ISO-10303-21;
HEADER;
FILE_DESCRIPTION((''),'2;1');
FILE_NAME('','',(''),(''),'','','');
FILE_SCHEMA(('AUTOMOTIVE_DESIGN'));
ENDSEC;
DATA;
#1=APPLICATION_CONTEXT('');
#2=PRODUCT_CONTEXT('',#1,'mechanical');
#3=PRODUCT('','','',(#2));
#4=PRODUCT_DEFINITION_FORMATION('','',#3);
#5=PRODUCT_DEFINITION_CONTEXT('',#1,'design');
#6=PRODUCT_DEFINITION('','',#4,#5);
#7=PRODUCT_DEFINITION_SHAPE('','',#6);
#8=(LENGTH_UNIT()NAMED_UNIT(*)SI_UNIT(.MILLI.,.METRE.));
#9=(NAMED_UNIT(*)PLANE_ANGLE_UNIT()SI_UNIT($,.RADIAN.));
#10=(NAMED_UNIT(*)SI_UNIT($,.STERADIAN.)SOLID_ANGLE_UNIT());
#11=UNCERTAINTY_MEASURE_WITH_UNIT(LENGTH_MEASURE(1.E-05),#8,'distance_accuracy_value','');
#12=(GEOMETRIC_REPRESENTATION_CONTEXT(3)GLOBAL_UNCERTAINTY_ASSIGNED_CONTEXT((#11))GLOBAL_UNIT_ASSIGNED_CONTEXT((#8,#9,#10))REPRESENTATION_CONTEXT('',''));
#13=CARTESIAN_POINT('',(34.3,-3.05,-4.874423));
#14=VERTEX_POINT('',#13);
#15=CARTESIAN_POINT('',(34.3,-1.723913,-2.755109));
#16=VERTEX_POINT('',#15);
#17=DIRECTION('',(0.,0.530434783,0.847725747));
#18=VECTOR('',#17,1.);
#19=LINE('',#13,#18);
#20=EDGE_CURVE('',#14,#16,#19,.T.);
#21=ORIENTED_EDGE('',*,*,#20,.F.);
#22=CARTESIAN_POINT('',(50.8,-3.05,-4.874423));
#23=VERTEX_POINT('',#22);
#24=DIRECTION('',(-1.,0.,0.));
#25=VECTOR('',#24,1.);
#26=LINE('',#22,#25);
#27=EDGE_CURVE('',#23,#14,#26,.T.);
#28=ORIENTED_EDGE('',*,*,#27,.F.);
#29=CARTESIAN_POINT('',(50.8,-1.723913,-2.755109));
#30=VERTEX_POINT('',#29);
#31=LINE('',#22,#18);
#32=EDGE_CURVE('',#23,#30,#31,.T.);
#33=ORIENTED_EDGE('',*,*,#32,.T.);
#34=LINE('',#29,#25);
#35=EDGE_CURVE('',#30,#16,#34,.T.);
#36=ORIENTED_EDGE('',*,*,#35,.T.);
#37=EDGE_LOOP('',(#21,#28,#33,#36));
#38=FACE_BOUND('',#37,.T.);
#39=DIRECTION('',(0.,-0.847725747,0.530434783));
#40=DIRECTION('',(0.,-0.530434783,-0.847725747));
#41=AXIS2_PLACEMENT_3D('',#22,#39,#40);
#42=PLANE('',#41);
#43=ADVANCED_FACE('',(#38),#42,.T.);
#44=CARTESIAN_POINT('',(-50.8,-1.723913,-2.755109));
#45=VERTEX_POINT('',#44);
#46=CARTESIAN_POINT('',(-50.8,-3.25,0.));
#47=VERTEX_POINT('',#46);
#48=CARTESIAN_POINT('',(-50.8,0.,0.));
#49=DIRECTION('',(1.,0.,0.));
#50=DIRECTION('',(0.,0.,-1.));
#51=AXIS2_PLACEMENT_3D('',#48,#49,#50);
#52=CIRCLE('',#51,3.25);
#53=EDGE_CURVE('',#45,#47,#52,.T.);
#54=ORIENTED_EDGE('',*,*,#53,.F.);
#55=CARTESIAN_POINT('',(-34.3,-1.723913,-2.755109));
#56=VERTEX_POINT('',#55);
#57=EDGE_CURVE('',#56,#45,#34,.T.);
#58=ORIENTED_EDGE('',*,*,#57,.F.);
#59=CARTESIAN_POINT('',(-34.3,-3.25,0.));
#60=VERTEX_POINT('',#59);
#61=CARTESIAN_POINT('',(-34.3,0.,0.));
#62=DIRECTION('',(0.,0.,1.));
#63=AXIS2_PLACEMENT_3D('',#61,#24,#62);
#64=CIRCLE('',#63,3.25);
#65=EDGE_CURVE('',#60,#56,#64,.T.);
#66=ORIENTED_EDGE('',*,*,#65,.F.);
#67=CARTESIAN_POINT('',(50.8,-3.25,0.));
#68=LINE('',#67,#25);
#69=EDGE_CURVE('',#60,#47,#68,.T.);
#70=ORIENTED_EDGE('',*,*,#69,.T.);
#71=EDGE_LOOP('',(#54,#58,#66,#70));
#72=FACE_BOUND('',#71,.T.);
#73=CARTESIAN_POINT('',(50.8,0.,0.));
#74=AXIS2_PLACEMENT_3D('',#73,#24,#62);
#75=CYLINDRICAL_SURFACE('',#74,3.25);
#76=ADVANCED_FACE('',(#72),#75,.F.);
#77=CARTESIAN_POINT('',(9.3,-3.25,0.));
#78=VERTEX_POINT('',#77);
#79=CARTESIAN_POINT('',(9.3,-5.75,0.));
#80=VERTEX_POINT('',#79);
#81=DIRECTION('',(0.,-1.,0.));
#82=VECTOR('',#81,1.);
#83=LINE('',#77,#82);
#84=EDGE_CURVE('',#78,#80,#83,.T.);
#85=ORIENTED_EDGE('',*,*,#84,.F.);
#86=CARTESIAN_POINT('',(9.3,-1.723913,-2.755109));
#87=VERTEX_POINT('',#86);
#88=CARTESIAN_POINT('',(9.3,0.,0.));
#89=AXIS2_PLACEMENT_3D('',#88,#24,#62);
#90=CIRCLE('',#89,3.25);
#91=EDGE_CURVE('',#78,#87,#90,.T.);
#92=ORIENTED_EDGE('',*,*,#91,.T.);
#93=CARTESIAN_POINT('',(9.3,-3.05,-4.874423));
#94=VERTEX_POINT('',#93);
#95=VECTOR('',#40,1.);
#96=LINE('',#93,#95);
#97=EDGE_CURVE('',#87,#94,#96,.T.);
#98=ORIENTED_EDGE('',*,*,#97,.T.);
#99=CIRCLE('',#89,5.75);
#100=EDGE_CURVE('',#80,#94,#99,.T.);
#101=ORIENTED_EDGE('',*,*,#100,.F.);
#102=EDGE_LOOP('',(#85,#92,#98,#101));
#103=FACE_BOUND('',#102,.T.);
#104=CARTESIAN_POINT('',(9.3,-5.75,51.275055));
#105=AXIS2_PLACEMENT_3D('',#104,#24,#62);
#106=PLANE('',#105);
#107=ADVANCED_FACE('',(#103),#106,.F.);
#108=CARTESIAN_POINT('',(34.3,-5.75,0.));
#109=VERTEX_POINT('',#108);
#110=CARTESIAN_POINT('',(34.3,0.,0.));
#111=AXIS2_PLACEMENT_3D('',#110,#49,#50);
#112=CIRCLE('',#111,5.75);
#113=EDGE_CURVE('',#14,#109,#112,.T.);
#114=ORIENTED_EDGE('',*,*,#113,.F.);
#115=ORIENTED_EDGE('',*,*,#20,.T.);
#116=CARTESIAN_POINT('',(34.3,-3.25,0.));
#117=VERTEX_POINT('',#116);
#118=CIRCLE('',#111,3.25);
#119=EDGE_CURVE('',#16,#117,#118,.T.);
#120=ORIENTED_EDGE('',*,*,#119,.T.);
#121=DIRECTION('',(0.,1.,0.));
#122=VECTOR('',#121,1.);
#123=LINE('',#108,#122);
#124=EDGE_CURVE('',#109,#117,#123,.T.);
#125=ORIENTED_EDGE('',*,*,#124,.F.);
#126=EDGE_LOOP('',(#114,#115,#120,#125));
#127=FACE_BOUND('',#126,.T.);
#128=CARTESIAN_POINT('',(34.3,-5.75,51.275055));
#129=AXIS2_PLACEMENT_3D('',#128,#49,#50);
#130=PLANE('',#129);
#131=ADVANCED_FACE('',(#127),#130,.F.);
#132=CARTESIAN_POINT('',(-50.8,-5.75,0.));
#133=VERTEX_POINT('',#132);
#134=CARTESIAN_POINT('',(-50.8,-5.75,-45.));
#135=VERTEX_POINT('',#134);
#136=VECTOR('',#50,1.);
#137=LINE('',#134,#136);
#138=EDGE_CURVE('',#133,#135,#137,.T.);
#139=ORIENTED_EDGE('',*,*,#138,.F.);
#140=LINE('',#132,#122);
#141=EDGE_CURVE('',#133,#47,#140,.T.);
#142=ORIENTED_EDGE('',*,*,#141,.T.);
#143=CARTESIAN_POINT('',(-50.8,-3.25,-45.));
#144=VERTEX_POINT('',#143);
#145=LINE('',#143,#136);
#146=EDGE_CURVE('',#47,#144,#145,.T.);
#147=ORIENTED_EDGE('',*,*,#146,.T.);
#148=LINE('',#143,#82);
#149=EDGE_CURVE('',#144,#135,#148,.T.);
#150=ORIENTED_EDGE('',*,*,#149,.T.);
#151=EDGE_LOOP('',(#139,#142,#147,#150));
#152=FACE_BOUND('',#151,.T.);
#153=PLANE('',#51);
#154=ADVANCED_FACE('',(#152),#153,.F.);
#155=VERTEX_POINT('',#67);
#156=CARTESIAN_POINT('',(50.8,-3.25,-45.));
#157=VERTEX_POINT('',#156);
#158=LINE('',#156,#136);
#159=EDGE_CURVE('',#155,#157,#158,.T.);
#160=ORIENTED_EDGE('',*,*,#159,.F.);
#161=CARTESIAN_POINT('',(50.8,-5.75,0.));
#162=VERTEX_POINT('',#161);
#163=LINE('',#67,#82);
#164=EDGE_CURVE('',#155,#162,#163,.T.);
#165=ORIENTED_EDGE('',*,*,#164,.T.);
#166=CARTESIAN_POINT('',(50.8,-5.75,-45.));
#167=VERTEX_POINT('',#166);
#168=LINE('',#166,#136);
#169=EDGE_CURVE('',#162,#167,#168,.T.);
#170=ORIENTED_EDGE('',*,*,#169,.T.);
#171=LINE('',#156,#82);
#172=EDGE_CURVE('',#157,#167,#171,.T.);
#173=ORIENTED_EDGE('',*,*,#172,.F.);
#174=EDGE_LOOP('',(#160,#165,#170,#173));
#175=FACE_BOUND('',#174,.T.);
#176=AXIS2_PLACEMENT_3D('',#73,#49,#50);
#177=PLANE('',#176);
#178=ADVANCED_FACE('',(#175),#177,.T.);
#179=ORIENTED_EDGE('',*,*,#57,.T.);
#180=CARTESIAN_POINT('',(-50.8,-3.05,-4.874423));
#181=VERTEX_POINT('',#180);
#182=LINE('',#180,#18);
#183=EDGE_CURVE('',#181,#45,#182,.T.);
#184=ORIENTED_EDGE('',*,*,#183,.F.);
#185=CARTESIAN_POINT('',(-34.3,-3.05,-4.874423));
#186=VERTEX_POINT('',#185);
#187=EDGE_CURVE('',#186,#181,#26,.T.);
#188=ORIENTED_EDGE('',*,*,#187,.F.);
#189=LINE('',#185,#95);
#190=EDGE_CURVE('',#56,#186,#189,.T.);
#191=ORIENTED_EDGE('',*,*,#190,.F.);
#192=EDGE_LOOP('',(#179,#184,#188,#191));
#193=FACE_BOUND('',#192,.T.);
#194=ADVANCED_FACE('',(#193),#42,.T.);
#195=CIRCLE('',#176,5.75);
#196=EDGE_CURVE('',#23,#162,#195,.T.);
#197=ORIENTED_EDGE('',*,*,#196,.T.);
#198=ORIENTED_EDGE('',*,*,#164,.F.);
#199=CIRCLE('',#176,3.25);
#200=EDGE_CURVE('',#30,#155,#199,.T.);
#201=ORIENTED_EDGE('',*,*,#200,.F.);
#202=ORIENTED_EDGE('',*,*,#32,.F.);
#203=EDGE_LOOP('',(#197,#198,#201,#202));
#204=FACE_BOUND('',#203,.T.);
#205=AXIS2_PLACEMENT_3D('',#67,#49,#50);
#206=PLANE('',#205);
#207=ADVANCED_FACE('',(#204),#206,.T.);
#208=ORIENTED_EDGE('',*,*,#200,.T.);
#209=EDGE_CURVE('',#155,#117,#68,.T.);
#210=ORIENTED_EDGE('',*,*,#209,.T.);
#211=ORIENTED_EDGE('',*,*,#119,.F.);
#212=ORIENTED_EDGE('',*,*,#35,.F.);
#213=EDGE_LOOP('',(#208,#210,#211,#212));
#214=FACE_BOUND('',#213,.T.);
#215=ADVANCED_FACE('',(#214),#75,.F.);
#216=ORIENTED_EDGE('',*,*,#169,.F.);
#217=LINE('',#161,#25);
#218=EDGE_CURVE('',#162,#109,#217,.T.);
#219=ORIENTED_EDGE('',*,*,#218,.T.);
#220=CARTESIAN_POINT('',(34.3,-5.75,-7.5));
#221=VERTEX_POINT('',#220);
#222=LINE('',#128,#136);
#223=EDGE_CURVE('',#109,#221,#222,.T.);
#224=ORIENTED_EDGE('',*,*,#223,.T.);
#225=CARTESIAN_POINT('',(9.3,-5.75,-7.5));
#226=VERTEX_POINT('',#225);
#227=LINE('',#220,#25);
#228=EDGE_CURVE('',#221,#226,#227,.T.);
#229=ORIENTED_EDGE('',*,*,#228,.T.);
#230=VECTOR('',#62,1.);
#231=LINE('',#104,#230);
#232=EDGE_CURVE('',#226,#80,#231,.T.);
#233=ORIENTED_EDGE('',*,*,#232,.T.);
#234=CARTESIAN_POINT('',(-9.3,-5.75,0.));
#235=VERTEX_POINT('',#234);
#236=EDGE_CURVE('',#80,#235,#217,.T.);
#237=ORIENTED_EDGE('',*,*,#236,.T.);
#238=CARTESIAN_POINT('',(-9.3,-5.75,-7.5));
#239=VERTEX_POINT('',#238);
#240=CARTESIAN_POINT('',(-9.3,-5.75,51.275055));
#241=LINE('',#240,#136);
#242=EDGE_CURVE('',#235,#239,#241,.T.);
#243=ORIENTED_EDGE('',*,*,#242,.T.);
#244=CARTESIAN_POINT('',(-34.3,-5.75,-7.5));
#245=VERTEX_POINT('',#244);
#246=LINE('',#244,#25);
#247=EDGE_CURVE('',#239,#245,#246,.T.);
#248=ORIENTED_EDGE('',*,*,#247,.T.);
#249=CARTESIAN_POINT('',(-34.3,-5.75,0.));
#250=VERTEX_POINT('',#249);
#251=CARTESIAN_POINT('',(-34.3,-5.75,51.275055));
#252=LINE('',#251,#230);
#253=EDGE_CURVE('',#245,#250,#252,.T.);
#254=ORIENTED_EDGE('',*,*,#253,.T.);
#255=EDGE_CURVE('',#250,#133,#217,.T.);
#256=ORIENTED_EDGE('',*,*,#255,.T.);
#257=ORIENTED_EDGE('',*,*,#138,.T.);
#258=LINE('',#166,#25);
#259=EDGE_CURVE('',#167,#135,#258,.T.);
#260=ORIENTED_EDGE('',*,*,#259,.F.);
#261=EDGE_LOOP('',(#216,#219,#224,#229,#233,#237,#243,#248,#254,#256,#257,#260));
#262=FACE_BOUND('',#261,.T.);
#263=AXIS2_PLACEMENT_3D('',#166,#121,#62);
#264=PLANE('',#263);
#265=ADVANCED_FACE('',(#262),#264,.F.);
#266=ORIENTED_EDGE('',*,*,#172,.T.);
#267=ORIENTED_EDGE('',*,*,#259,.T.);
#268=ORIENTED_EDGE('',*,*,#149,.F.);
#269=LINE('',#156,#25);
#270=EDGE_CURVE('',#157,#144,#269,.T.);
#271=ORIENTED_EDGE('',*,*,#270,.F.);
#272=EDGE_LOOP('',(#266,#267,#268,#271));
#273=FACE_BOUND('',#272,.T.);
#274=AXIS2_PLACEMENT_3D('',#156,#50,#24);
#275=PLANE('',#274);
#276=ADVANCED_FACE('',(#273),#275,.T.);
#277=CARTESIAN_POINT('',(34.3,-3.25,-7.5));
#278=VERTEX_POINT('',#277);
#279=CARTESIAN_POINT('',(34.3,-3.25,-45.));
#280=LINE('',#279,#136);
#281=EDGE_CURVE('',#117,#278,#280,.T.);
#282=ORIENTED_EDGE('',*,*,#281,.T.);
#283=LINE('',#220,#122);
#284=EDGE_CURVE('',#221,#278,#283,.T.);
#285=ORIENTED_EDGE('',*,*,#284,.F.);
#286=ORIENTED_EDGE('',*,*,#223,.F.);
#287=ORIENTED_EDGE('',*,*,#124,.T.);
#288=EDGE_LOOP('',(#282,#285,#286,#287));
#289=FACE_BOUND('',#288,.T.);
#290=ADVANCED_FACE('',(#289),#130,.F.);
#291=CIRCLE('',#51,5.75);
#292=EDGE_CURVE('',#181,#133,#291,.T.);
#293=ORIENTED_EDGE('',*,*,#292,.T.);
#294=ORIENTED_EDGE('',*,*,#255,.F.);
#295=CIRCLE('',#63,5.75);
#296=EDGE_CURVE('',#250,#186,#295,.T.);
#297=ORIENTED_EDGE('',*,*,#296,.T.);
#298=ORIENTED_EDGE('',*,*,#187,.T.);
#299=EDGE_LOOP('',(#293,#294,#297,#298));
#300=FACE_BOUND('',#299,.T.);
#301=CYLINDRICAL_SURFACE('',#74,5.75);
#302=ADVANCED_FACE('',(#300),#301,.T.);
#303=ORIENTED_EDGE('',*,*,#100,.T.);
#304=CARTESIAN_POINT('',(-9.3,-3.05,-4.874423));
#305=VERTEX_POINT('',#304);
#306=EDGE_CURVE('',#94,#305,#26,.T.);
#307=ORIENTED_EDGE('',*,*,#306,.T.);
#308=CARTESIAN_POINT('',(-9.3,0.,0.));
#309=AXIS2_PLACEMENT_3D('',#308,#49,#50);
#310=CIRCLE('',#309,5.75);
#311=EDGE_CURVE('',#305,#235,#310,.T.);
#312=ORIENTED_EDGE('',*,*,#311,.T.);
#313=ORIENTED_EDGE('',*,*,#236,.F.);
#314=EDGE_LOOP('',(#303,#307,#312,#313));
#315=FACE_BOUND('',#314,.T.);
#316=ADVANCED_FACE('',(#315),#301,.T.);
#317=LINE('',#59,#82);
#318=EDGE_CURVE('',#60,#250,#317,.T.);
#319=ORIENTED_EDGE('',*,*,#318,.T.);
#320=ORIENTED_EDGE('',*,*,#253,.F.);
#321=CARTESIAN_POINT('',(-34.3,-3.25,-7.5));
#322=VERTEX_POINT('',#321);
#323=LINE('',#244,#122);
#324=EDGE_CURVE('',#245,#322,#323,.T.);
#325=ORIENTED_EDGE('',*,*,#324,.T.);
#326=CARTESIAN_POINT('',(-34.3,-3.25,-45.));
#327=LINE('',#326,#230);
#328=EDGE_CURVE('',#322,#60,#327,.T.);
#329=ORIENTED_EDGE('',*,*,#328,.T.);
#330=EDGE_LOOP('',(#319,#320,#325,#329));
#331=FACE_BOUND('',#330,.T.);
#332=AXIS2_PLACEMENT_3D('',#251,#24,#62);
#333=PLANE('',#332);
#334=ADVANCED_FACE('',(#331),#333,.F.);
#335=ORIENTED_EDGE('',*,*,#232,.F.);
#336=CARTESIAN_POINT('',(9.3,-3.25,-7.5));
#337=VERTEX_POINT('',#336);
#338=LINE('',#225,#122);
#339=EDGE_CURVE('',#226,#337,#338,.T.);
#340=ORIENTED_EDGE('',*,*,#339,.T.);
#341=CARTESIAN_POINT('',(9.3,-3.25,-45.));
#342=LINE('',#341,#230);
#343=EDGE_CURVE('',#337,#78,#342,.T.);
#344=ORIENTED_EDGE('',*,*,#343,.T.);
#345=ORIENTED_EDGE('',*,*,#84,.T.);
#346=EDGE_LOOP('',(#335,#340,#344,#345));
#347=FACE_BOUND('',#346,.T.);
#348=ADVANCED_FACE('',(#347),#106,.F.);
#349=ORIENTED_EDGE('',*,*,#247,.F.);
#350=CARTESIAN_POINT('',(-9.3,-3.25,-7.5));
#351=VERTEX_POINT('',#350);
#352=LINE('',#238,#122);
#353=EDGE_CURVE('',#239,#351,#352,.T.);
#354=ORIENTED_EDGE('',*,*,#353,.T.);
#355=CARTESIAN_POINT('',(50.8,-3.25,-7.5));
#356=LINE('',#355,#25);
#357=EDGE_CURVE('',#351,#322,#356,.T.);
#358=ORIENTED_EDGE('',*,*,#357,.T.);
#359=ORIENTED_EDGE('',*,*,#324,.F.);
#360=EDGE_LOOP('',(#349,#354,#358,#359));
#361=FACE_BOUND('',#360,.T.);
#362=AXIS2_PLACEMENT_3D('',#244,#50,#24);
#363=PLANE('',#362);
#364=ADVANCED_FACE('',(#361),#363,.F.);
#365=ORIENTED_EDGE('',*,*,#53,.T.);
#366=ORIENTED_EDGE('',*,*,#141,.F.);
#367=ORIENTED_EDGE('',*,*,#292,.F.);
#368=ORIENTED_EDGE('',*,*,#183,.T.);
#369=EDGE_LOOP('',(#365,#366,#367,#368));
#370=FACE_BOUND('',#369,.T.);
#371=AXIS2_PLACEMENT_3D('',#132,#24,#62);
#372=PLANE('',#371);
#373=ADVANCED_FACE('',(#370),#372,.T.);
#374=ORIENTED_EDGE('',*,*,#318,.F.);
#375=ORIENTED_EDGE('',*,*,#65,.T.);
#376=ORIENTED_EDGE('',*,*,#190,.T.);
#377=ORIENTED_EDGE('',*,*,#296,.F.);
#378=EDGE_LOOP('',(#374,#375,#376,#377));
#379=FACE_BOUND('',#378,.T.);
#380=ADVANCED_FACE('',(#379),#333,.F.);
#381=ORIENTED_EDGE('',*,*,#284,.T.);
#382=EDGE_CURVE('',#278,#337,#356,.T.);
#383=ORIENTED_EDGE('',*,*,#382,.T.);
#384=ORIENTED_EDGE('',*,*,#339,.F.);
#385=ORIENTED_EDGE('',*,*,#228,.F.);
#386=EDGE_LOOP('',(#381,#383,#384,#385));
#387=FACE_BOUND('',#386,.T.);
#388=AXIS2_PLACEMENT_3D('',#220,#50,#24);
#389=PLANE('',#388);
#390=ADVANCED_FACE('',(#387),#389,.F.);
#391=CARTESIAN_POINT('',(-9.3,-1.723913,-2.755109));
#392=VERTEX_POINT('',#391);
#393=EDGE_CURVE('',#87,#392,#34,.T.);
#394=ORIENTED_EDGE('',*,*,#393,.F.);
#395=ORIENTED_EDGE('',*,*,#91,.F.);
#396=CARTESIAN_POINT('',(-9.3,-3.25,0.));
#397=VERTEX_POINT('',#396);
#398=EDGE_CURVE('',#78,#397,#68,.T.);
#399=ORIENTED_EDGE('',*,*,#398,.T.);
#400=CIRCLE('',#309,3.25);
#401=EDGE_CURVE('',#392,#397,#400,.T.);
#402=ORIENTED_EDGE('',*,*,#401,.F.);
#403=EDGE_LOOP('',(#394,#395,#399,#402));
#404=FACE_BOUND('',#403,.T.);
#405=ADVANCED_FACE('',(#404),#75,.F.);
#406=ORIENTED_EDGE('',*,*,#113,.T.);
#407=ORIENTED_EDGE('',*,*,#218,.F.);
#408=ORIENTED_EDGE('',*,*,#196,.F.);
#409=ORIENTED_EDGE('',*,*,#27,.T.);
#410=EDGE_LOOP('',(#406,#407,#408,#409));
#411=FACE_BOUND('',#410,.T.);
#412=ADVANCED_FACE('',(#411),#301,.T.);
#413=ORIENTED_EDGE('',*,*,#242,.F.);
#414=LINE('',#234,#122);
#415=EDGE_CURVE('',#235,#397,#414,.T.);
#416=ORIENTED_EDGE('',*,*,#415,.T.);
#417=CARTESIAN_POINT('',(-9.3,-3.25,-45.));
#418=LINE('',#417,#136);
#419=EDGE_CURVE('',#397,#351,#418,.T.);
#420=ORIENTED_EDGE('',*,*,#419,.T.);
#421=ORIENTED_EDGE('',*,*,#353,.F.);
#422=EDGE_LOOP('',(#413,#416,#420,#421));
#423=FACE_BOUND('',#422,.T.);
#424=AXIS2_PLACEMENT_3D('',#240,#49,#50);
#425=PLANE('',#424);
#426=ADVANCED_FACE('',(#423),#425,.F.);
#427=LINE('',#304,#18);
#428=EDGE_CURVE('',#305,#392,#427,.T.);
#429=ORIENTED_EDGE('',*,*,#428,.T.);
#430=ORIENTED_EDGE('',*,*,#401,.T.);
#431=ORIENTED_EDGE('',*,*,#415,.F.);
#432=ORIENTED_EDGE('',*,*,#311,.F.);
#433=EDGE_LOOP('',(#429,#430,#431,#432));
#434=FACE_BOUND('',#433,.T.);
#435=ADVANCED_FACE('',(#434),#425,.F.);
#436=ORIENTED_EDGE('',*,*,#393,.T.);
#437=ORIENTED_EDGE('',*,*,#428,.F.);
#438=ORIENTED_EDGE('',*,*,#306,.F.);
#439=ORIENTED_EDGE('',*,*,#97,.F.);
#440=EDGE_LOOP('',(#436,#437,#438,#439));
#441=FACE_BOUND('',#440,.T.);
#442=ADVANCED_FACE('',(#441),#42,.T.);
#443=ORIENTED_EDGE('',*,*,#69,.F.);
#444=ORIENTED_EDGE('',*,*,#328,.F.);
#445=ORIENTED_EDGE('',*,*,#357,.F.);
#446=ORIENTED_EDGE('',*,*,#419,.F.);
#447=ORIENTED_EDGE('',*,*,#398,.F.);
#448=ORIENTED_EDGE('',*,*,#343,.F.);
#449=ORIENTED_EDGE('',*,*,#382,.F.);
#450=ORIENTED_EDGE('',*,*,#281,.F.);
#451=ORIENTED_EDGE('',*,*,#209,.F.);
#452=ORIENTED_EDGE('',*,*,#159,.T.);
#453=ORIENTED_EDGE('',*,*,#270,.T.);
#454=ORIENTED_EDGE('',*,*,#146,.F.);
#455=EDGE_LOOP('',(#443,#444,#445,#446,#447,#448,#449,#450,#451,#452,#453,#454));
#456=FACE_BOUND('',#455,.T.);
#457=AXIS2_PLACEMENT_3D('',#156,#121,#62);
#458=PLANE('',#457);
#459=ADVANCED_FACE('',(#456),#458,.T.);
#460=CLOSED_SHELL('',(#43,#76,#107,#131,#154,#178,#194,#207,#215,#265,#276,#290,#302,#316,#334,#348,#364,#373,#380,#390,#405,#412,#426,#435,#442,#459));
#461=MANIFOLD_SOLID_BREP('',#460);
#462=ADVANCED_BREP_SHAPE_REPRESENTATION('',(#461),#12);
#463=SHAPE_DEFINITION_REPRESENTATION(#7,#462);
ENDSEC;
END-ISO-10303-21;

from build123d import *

# Parameters (mm, degrees)
BASE_FLANGE1_DEPTH      = 50.8
CUT_EXTRUDE1_DEPTH      = 69.10802082
CUT_EXTRUDE1_DEPTH_BACK = 69.10802082
SKETCH6_W               = 25
SKETCH6_H               = 58.775055245


# Sheet-metal steps are written as plain solids
with BuildPart() as part:
    # Sketch1 → Base-Flange1 (new, symmetric)
    with BuildSketch(Plane(origin=(0, 0, 0), x_dir=(0, 0, -1), z_dir=(1, 0, 0))):
        with BuildLine():
            Line((45, -5.75), (0, -5.75))
            ThreePointArc((0, -5.75), (-2.786126343, 5.029910536), (4.874423043, -3.05))
            Line((4.874423043, -3.05), (2.755108676, -1.723913043))
            ThreePointArc((2.755108676, -1.723913043), (-1.574767064, 2.842992912), (0, -3.25))
            Line((0, -3.25), (45, -3.25))
            Line((45, -3.25), (45, -5.75))
        make_face()
    extrude(amount=BASE_FLANGE1_DEPTH, both=True)

    # Sketch6 → Cut-Extrude1 (cut, two sides: drawn at the far end of the back side and taken through both)
    with BuildSketch(Plane(origin=(0, 0, 0), x_dir=(1, 0, 0), z_dir=(0, 1, 0)).offset(-CUT_EXTRUDE1_DEPTH_BACK)):
        with Locations((-21.8, -21.887527623)):
            Rectangle(SKETCH6_W, SKETCH6_H)
        with Locations((21.8, -21.887527623)):
            Rectangle(SKETCH6_W, SKETCH6_H)
    extrude(amount=CUT_EXTRUDE1_DEPTH + CUT_EXTRUDE1_DEPTH_BACK, mode=Mode.SUBTRACT)


solid = part.part
